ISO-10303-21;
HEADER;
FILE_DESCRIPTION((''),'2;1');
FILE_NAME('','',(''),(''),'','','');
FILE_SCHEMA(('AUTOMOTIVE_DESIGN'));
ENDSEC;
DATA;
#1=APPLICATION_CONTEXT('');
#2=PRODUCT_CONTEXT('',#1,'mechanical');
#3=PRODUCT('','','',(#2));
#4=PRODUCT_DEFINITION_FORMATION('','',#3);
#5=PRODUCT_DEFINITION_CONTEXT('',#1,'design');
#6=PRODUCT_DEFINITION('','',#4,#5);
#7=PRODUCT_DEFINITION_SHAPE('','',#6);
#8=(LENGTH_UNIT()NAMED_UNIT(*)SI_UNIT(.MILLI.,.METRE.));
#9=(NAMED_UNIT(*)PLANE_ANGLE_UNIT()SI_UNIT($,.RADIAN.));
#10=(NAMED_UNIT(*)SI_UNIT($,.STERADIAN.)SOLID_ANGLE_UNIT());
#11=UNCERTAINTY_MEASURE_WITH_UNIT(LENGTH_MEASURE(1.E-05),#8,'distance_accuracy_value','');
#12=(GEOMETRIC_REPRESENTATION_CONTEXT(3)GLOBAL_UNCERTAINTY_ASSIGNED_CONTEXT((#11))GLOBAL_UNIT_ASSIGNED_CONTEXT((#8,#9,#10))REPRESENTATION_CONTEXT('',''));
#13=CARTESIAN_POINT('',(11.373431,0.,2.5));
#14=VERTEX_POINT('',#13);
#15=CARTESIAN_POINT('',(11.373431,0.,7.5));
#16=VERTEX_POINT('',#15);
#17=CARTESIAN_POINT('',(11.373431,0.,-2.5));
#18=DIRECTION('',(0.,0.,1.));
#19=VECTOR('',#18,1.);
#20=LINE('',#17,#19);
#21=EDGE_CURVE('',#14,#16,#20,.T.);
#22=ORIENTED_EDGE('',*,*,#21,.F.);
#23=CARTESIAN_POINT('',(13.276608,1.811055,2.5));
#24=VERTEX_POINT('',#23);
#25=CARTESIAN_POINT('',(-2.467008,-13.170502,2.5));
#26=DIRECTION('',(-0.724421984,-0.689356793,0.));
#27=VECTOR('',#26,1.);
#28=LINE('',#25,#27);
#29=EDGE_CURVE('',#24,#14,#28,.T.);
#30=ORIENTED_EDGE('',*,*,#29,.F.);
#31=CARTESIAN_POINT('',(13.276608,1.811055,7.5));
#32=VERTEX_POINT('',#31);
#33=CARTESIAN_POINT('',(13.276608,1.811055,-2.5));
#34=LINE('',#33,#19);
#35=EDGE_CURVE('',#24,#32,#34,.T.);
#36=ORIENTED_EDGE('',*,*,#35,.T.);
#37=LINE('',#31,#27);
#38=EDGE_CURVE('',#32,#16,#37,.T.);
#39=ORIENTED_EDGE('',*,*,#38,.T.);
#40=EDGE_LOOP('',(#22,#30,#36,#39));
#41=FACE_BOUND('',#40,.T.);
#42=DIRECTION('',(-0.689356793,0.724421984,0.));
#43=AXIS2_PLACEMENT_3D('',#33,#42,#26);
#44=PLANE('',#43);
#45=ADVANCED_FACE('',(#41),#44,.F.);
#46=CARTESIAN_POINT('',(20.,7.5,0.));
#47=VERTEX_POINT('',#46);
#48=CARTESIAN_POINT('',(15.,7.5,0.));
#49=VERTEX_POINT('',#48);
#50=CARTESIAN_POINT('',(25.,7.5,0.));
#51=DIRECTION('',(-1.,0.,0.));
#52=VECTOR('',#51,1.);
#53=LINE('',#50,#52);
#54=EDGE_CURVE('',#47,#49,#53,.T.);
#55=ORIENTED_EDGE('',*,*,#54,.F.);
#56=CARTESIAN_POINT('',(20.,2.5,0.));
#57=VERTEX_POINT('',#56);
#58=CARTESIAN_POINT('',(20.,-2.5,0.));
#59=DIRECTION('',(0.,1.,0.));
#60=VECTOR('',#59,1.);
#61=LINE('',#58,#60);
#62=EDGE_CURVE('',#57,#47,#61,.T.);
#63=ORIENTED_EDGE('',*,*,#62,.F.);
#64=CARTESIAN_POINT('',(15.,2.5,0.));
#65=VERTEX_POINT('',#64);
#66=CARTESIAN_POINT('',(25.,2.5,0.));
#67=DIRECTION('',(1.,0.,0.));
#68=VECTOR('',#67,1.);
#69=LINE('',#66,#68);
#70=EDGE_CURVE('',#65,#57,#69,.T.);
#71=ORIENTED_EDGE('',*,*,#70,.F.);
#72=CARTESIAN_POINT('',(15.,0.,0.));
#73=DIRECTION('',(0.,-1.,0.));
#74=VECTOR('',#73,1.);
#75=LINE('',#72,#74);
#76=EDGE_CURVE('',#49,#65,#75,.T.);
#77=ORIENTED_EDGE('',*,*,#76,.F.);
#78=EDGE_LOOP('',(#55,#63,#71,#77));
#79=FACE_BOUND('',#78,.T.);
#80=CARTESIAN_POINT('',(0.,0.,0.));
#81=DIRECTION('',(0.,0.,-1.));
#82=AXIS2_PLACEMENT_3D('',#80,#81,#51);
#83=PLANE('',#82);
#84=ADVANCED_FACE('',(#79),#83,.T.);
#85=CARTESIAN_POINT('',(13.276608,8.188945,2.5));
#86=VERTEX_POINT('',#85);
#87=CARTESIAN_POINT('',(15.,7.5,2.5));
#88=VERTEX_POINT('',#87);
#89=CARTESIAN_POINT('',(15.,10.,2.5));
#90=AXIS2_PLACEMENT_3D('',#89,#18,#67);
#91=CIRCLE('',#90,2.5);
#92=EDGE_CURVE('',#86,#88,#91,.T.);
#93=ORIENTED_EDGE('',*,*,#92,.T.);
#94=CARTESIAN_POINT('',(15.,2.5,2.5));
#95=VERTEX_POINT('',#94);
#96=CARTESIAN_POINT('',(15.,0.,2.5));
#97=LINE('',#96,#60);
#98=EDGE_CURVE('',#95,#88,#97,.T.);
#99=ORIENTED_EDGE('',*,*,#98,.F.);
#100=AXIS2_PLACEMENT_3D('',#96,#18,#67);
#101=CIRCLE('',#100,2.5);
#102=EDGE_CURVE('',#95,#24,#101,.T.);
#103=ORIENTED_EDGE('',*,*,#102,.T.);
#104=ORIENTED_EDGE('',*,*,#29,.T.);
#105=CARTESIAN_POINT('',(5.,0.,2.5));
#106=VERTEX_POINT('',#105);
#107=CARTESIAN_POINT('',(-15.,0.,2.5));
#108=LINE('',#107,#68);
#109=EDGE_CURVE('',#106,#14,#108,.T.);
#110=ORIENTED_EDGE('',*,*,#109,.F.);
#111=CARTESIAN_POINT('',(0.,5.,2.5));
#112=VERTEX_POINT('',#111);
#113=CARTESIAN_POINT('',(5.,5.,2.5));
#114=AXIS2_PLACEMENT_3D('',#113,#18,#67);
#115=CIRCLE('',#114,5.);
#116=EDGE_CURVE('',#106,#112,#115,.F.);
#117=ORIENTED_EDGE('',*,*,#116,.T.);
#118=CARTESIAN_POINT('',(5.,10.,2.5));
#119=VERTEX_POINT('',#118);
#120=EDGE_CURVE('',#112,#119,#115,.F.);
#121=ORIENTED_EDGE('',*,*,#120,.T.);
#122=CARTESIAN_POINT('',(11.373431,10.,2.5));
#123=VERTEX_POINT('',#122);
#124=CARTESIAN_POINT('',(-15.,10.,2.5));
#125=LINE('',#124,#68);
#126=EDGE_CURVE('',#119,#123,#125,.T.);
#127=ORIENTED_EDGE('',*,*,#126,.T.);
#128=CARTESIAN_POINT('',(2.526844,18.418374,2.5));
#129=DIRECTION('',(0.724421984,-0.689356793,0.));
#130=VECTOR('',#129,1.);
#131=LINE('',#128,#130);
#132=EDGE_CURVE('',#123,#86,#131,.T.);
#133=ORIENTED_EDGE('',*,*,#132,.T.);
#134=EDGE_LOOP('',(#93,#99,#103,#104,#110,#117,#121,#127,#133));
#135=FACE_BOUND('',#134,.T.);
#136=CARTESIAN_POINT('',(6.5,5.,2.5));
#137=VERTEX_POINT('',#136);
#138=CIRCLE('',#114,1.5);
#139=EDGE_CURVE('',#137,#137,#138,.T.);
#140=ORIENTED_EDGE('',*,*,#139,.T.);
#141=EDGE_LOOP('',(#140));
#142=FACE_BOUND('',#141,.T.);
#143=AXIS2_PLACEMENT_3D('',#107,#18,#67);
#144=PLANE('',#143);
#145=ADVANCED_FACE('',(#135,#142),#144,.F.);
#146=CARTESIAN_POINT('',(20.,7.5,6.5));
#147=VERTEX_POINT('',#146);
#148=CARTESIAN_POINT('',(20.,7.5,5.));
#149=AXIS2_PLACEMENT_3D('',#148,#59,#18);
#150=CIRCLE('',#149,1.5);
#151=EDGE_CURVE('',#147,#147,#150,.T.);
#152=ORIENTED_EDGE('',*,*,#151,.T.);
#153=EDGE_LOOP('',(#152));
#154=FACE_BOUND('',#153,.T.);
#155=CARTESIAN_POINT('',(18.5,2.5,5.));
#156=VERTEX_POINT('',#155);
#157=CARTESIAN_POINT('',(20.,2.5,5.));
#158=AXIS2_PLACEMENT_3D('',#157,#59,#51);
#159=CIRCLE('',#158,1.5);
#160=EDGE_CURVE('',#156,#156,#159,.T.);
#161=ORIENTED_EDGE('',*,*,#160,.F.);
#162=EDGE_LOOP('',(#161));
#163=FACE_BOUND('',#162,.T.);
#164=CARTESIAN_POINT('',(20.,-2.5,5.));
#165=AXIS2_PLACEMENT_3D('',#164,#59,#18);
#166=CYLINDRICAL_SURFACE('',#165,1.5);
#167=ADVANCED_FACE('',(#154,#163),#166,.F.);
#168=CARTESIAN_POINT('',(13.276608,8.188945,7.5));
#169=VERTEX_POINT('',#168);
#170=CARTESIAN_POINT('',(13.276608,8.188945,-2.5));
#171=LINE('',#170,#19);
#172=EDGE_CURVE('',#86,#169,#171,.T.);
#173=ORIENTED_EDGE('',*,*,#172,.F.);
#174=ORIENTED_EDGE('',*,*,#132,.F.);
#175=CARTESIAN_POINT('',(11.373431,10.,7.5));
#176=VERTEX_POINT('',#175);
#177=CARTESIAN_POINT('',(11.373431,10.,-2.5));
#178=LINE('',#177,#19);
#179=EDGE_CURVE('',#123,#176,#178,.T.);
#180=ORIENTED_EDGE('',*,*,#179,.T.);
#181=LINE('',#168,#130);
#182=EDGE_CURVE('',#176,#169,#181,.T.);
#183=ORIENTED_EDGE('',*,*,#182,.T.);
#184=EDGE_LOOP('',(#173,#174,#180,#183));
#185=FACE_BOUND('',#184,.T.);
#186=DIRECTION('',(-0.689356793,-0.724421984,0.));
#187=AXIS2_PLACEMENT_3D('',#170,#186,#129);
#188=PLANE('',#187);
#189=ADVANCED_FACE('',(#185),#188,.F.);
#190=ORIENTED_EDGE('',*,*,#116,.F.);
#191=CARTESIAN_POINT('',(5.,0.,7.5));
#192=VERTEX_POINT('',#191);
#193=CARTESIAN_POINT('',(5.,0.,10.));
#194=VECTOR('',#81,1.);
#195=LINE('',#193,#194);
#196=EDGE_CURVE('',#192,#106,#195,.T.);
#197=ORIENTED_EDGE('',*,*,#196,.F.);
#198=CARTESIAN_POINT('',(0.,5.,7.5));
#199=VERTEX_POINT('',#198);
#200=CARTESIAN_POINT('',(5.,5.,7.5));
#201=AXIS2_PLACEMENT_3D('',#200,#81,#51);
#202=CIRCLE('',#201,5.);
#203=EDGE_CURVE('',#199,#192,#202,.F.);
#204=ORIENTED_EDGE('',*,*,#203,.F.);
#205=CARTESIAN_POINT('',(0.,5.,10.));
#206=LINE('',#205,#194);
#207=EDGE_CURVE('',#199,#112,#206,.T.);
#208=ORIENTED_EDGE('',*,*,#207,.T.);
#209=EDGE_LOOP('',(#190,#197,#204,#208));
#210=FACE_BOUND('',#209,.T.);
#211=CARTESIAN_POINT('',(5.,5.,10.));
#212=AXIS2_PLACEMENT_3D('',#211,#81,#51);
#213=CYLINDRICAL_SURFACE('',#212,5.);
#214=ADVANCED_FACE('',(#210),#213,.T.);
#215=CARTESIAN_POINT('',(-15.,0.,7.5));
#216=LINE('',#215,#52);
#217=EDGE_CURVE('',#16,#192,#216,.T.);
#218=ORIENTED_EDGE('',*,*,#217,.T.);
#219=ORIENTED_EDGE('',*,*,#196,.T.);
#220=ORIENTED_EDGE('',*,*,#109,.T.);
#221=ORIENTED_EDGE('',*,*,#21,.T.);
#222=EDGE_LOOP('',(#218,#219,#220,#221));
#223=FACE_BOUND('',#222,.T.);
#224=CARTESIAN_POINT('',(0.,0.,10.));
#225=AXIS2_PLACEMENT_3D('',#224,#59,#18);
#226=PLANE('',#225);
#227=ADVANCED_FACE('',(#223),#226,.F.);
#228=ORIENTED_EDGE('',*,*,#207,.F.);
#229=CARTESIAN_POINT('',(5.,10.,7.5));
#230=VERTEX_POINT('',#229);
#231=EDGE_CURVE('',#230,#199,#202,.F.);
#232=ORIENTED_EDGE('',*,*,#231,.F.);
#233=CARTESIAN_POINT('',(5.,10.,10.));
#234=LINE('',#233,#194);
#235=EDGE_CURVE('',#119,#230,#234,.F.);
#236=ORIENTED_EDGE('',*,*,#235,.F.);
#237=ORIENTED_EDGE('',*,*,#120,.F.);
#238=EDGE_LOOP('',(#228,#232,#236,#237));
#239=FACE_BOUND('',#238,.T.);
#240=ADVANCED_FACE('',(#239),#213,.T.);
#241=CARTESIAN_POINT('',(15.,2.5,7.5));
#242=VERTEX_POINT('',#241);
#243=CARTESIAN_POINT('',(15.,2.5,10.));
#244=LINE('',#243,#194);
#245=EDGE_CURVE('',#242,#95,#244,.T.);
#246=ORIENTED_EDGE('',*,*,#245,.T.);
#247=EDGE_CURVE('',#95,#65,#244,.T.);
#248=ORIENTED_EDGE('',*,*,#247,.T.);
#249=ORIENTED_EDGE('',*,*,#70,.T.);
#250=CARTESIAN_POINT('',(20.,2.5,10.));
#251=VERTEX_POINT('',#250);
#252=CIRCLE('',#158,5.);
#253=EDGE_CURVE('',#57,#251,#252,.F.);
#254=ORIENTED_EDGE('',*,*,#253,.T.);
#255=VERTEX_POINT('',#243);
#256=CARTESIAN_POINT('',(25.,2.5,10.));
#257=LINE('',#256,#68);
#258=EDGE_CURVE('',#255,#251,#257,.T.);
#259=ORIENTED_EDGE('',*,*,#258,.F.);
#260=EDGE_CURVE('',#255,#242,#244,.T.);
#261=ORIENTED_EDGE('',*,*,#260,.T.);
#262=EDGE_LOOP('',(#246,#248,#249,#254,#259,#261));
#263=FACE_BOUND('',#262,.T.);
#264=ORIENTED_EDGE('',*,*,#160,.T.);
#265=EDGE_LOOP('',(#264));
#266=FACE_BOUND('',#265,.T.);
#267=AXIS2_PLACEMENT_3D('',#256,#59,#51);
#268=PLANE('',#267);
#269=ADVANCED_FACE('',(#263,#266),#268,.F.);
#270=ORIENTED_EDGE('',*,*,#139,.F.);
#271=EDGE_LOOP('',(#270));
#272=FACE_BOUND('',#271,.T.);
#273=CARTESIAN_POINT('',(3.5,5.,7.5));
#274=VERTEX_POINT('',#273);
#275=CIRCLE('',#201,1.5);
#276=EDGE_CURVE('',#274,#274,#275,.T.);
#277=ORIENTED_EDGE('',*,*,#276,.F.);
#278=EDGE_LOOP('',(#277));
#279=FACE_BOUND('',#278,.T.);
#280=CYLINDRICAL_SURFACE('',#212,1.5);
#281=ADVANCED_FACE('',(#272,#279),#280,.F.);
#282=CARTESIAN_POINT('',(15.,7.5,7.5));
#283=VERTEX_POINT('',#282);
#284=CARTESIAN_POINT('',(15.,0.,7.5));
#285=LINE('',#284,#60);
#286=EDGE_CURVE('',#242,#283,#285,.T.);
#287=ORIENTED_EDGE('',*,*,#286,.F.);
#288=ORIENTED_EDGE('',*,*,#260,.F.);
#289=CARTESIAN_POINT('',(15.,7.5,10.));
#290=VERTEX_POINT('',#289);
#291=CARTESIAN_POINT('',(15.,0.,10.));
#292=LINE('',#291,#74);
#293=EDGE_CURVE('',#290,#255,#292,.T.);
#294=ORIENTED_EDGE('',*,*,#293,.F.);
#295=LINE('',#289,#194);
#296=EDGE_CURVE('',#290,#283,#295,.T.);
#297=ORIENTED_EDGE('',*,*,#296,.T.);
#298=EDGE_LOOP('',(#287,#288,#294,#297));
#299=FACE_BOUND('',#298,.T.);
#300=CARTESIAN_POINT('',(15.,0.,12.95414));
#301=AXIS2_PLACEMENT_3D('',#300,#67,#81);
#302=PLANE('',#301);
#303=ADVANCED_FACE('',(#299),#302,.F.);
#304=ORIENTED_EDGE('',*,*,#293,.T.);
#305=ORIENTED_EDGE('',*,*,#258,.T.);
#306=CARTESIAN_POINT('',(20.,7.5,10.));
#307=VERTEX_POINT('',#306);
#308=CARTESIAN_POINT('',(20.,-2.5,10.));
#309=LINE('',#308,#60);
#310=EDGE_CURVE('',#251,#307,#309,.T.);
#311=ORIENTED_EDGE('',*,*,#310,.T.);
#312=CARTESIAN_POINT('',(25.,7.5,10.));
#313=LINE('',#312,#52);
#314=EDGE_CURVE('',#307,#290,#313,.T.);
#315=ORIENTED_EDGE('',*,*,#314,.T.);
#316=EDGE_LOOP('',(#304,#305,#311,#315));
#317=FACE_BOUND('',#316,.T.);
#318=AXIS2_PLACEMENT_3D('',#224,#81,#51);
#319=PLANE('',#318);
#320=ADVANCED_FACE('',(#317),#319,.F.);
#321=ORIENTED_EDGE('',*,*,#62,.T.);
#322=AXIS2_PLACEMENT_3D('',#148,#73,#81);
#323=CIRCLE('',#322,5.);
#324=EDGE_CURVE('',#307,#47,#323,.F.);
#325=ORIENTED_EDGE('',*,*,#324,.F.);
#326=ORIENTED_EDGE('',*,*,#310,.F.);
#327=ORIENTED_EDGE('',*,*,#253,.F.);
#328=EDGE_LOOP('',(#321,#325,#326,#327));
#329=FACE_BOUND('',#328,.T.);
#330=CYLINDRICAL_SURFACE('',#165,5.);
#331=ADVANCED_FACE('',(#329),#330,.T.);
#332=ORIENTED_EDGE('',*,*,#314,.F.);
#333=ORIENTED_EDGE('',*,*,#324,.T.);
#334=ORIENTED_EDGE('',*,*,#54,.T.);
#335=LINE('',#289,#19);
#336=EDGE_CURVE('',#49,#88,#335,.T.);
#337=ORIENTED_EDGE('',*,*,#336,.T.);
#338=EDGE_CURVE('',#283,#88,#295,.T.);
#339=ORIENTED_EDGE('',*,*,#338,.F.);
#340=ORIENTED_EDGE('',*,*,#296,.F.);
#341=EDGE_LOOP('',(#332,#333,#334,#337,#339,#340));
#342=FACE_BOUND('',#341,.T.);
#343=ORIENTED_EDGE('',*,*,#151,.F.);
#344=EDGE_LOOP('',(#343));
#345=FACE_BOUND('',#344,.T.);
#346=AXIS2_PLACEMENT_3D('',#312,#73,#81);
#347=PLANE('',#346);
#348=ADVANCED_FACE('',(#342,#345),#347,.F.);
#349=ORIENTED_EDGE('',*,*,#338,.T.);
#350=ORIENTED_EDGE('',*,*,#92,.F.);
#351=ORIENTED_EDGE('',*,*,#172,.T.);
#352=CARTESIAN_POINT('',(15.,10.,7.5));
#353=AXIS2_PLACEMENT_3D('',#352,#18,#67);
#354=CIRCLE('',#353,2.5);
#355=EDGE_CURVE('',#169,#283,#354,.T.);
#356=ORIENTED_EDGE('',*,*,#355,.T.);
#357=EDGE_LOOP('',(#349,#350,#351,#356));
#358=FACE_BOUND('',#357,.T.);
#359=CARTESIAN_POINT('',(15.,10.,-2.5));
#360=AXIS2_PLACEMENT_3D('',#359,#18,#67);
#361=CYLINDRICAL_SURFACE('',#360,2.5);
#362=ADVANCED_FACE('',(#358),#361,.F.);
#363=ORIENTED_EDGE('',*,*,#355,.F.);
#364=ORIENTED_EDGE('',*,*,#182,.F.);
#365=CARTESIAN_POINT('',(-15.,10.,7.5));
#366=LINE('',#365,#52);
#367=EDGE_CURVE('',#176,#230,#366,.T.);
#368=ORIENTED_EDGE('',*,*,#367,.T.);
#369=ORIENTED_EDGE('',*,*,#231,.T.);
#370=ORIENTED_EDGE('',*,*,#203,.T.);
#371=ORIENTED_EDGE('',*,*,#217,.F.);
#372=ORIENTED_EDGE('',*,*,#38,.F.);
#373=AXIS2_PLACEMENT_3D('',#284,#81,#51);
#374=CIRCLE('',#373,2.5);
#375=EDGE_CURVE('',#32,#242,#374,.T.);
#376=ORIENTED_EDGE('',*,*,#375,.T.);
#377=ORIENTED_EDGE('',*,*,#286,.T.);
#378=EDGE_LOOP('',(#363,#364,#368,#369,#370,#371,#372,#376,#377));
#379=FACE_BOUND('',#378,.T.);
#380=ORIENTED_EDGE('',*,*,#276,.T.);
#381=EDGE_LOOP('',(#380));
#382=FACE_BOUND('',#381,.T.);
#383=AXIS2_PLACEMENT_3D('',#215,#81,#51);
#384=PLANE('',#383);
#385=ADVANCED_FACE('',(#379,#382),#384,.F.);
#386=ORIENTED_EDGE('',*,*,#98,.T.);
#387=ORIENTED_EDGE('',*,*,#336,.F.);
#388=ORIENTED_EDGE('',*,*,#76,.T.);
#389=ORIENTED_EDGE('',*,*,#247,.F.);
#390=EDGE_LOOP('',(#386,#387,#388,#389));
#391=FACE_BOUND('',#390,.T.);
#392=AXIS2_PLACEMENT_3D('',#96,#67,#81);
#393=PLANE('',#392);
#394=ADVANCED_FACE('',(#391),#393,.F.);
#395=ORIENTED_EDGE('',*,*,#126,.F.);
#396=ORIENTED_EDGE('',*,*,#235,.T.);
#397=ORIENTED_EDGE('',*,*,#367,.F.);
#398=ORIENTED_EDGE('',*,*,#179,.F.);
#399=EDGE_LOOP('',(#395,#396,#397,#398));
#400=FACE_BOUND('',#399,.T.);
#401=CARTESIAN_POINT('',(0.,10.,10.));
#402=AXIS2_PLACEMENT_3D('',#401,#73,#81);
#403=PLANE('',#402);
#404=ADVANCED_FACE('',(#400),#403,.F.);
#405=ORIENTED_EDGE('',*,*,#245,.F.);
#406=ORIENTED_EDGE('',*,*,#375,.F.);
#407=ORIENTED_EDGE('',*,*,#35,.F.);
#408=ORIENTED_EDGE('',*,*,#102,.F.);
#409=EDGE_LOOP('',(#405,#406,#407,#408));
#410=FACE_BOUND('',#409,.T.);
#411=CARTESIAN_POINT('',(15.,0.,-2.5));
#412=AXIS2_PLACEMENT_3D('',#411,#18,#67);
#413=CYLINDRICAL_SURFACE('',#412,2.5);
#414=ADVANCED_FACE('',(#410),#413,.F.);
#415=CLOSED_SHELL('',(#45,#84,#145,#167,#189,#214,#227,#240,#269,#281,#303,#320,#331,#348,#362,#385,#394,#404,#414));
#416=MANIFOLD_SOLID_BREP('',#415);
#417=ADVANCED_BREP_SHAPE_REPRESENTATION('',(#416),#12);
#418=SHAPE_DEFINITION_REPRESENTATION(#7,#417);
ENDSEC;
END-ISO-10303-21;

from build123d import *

# Parameters (mm, degrees)
CROQUIS1_R              = 1.5
SALIENTE_EXTRUIR1_DEPTH = 10
CROQUIS2_R              = 1.5
CORTAR_EXTRUIR1_DEPTH   = 10
CROQUIS3_W              = 30
CROQUIS3_H              = 5.454139521
CORTAR_EXTRUIR2_DEPTH   = 10
REDONDEO1_R             = 5
CORTAR_EXTRUIR3_DEPTH   = 10


with BuildPart() as part:
    # Croquis1 → Saliente-Extruir1 (new body)
    with BuildSketch(Plane.XY):
        Polygon((0, 0), (15, 0), (15, 2.5), (25, 2.5), (25, 7.5), (15, 7.5), (15, 10), (0, 10), align=None)
        with Locations((5, 5)):
            Circle(CROQUIS1_R, mode=Mode.SUBTRACT)
    extrude(amount=SALIENTE_EXTRUIR1_DEPTH)

    # Croquis2 → Cortar-Extruir1 (cut)
    with BuildSketch(Plane(origin=(0, 7.5, 0), x_dir=(1, 0, 0), z_dir=(0, 1, 0))):
        with Locations(Location((20, -5, 0), (0, 0, 270))):
            Circle(CROQUIS2_R)
        with BuildLine():
            Line((20, -10), (20.922664414, -18.434540281))
            Line((20.922664414, -18.434540281), (42.481308924, -25.135304993))
            Line((42.481308924, -25.135304993), (36.797179784, -0.604681732))
            Line((36.797179784, -0.604681732), (34.226694382, 7.989532519))
            Line((34.226694382, 7.989532519), (20.461332207, 6.483723144))
            Line((20.461332207, 6.483723144), (20, 0))
            ThreePointArc((20, 0), (25, -5), (20, -10))
        make_face()
    extrude(amount=-CORTAR_EXTRUIR1_DEPTH, mode=Mode.SUBTRACT)

    # Croquis3 → Cortar-Extruir2 (cut)
    with BuildSketch(Plane(origin=(0, 10, 0), x_dir=(1, 0, 0), z_dir=(0, 1, 0))):
        with Locations((0, -10.227069761)):
            Rectangle(CROQUIS3_W, CROQUIS3_H)
        with Locations((0, 0.227069761)):
            Rectangle(CROQUIS3_W, CROQUIS3_H)
    extrude(amount=-CORTAR_EXTRUIR2_DEPTH, mode=Mode.SUBTRACT)

    # Redondeo1
    redondeo1_edges = [part.edges().sort_by_distance(p)[0] for p in [
        (0, 0, 5),
        (0, 10, 5),
    ]]
    fillet(redondeo1_edges, radius=REDONDEO1_R - 0.0001)  # a hair under: the kernel refuses the full size

    # Croquis4 → Cortar-Extruir3 (cut)
    with BuildSketch(Plane.XY.offset(7.5)):
        with BuildLine():
            Line((13.276608017, 8.188945039), (11.373430966, 10))
            Line((11.373430966, 10), (13.276608017, 11.811054961))
            ThreePointArc((13.276608017, 11.811054961), (17.5, 10), (13.276608017, 8.188945039))
        make_face()
        with BuildLine():
            Line((13.276608017, 1.811054961), (11.373430966, 0))
            Line((11.373430966, 0), (13.276608017, -1.811054961))
            ThreePointArc((13.276608017, -1.811054961), (17.5, 0), (13.276608017, 1.811054961))
        make_face()
    extrude(amount=-CORTAR_EXTRUIR3_DEPTH, mode=Mode.SUBTRACT)


solid = part.part
